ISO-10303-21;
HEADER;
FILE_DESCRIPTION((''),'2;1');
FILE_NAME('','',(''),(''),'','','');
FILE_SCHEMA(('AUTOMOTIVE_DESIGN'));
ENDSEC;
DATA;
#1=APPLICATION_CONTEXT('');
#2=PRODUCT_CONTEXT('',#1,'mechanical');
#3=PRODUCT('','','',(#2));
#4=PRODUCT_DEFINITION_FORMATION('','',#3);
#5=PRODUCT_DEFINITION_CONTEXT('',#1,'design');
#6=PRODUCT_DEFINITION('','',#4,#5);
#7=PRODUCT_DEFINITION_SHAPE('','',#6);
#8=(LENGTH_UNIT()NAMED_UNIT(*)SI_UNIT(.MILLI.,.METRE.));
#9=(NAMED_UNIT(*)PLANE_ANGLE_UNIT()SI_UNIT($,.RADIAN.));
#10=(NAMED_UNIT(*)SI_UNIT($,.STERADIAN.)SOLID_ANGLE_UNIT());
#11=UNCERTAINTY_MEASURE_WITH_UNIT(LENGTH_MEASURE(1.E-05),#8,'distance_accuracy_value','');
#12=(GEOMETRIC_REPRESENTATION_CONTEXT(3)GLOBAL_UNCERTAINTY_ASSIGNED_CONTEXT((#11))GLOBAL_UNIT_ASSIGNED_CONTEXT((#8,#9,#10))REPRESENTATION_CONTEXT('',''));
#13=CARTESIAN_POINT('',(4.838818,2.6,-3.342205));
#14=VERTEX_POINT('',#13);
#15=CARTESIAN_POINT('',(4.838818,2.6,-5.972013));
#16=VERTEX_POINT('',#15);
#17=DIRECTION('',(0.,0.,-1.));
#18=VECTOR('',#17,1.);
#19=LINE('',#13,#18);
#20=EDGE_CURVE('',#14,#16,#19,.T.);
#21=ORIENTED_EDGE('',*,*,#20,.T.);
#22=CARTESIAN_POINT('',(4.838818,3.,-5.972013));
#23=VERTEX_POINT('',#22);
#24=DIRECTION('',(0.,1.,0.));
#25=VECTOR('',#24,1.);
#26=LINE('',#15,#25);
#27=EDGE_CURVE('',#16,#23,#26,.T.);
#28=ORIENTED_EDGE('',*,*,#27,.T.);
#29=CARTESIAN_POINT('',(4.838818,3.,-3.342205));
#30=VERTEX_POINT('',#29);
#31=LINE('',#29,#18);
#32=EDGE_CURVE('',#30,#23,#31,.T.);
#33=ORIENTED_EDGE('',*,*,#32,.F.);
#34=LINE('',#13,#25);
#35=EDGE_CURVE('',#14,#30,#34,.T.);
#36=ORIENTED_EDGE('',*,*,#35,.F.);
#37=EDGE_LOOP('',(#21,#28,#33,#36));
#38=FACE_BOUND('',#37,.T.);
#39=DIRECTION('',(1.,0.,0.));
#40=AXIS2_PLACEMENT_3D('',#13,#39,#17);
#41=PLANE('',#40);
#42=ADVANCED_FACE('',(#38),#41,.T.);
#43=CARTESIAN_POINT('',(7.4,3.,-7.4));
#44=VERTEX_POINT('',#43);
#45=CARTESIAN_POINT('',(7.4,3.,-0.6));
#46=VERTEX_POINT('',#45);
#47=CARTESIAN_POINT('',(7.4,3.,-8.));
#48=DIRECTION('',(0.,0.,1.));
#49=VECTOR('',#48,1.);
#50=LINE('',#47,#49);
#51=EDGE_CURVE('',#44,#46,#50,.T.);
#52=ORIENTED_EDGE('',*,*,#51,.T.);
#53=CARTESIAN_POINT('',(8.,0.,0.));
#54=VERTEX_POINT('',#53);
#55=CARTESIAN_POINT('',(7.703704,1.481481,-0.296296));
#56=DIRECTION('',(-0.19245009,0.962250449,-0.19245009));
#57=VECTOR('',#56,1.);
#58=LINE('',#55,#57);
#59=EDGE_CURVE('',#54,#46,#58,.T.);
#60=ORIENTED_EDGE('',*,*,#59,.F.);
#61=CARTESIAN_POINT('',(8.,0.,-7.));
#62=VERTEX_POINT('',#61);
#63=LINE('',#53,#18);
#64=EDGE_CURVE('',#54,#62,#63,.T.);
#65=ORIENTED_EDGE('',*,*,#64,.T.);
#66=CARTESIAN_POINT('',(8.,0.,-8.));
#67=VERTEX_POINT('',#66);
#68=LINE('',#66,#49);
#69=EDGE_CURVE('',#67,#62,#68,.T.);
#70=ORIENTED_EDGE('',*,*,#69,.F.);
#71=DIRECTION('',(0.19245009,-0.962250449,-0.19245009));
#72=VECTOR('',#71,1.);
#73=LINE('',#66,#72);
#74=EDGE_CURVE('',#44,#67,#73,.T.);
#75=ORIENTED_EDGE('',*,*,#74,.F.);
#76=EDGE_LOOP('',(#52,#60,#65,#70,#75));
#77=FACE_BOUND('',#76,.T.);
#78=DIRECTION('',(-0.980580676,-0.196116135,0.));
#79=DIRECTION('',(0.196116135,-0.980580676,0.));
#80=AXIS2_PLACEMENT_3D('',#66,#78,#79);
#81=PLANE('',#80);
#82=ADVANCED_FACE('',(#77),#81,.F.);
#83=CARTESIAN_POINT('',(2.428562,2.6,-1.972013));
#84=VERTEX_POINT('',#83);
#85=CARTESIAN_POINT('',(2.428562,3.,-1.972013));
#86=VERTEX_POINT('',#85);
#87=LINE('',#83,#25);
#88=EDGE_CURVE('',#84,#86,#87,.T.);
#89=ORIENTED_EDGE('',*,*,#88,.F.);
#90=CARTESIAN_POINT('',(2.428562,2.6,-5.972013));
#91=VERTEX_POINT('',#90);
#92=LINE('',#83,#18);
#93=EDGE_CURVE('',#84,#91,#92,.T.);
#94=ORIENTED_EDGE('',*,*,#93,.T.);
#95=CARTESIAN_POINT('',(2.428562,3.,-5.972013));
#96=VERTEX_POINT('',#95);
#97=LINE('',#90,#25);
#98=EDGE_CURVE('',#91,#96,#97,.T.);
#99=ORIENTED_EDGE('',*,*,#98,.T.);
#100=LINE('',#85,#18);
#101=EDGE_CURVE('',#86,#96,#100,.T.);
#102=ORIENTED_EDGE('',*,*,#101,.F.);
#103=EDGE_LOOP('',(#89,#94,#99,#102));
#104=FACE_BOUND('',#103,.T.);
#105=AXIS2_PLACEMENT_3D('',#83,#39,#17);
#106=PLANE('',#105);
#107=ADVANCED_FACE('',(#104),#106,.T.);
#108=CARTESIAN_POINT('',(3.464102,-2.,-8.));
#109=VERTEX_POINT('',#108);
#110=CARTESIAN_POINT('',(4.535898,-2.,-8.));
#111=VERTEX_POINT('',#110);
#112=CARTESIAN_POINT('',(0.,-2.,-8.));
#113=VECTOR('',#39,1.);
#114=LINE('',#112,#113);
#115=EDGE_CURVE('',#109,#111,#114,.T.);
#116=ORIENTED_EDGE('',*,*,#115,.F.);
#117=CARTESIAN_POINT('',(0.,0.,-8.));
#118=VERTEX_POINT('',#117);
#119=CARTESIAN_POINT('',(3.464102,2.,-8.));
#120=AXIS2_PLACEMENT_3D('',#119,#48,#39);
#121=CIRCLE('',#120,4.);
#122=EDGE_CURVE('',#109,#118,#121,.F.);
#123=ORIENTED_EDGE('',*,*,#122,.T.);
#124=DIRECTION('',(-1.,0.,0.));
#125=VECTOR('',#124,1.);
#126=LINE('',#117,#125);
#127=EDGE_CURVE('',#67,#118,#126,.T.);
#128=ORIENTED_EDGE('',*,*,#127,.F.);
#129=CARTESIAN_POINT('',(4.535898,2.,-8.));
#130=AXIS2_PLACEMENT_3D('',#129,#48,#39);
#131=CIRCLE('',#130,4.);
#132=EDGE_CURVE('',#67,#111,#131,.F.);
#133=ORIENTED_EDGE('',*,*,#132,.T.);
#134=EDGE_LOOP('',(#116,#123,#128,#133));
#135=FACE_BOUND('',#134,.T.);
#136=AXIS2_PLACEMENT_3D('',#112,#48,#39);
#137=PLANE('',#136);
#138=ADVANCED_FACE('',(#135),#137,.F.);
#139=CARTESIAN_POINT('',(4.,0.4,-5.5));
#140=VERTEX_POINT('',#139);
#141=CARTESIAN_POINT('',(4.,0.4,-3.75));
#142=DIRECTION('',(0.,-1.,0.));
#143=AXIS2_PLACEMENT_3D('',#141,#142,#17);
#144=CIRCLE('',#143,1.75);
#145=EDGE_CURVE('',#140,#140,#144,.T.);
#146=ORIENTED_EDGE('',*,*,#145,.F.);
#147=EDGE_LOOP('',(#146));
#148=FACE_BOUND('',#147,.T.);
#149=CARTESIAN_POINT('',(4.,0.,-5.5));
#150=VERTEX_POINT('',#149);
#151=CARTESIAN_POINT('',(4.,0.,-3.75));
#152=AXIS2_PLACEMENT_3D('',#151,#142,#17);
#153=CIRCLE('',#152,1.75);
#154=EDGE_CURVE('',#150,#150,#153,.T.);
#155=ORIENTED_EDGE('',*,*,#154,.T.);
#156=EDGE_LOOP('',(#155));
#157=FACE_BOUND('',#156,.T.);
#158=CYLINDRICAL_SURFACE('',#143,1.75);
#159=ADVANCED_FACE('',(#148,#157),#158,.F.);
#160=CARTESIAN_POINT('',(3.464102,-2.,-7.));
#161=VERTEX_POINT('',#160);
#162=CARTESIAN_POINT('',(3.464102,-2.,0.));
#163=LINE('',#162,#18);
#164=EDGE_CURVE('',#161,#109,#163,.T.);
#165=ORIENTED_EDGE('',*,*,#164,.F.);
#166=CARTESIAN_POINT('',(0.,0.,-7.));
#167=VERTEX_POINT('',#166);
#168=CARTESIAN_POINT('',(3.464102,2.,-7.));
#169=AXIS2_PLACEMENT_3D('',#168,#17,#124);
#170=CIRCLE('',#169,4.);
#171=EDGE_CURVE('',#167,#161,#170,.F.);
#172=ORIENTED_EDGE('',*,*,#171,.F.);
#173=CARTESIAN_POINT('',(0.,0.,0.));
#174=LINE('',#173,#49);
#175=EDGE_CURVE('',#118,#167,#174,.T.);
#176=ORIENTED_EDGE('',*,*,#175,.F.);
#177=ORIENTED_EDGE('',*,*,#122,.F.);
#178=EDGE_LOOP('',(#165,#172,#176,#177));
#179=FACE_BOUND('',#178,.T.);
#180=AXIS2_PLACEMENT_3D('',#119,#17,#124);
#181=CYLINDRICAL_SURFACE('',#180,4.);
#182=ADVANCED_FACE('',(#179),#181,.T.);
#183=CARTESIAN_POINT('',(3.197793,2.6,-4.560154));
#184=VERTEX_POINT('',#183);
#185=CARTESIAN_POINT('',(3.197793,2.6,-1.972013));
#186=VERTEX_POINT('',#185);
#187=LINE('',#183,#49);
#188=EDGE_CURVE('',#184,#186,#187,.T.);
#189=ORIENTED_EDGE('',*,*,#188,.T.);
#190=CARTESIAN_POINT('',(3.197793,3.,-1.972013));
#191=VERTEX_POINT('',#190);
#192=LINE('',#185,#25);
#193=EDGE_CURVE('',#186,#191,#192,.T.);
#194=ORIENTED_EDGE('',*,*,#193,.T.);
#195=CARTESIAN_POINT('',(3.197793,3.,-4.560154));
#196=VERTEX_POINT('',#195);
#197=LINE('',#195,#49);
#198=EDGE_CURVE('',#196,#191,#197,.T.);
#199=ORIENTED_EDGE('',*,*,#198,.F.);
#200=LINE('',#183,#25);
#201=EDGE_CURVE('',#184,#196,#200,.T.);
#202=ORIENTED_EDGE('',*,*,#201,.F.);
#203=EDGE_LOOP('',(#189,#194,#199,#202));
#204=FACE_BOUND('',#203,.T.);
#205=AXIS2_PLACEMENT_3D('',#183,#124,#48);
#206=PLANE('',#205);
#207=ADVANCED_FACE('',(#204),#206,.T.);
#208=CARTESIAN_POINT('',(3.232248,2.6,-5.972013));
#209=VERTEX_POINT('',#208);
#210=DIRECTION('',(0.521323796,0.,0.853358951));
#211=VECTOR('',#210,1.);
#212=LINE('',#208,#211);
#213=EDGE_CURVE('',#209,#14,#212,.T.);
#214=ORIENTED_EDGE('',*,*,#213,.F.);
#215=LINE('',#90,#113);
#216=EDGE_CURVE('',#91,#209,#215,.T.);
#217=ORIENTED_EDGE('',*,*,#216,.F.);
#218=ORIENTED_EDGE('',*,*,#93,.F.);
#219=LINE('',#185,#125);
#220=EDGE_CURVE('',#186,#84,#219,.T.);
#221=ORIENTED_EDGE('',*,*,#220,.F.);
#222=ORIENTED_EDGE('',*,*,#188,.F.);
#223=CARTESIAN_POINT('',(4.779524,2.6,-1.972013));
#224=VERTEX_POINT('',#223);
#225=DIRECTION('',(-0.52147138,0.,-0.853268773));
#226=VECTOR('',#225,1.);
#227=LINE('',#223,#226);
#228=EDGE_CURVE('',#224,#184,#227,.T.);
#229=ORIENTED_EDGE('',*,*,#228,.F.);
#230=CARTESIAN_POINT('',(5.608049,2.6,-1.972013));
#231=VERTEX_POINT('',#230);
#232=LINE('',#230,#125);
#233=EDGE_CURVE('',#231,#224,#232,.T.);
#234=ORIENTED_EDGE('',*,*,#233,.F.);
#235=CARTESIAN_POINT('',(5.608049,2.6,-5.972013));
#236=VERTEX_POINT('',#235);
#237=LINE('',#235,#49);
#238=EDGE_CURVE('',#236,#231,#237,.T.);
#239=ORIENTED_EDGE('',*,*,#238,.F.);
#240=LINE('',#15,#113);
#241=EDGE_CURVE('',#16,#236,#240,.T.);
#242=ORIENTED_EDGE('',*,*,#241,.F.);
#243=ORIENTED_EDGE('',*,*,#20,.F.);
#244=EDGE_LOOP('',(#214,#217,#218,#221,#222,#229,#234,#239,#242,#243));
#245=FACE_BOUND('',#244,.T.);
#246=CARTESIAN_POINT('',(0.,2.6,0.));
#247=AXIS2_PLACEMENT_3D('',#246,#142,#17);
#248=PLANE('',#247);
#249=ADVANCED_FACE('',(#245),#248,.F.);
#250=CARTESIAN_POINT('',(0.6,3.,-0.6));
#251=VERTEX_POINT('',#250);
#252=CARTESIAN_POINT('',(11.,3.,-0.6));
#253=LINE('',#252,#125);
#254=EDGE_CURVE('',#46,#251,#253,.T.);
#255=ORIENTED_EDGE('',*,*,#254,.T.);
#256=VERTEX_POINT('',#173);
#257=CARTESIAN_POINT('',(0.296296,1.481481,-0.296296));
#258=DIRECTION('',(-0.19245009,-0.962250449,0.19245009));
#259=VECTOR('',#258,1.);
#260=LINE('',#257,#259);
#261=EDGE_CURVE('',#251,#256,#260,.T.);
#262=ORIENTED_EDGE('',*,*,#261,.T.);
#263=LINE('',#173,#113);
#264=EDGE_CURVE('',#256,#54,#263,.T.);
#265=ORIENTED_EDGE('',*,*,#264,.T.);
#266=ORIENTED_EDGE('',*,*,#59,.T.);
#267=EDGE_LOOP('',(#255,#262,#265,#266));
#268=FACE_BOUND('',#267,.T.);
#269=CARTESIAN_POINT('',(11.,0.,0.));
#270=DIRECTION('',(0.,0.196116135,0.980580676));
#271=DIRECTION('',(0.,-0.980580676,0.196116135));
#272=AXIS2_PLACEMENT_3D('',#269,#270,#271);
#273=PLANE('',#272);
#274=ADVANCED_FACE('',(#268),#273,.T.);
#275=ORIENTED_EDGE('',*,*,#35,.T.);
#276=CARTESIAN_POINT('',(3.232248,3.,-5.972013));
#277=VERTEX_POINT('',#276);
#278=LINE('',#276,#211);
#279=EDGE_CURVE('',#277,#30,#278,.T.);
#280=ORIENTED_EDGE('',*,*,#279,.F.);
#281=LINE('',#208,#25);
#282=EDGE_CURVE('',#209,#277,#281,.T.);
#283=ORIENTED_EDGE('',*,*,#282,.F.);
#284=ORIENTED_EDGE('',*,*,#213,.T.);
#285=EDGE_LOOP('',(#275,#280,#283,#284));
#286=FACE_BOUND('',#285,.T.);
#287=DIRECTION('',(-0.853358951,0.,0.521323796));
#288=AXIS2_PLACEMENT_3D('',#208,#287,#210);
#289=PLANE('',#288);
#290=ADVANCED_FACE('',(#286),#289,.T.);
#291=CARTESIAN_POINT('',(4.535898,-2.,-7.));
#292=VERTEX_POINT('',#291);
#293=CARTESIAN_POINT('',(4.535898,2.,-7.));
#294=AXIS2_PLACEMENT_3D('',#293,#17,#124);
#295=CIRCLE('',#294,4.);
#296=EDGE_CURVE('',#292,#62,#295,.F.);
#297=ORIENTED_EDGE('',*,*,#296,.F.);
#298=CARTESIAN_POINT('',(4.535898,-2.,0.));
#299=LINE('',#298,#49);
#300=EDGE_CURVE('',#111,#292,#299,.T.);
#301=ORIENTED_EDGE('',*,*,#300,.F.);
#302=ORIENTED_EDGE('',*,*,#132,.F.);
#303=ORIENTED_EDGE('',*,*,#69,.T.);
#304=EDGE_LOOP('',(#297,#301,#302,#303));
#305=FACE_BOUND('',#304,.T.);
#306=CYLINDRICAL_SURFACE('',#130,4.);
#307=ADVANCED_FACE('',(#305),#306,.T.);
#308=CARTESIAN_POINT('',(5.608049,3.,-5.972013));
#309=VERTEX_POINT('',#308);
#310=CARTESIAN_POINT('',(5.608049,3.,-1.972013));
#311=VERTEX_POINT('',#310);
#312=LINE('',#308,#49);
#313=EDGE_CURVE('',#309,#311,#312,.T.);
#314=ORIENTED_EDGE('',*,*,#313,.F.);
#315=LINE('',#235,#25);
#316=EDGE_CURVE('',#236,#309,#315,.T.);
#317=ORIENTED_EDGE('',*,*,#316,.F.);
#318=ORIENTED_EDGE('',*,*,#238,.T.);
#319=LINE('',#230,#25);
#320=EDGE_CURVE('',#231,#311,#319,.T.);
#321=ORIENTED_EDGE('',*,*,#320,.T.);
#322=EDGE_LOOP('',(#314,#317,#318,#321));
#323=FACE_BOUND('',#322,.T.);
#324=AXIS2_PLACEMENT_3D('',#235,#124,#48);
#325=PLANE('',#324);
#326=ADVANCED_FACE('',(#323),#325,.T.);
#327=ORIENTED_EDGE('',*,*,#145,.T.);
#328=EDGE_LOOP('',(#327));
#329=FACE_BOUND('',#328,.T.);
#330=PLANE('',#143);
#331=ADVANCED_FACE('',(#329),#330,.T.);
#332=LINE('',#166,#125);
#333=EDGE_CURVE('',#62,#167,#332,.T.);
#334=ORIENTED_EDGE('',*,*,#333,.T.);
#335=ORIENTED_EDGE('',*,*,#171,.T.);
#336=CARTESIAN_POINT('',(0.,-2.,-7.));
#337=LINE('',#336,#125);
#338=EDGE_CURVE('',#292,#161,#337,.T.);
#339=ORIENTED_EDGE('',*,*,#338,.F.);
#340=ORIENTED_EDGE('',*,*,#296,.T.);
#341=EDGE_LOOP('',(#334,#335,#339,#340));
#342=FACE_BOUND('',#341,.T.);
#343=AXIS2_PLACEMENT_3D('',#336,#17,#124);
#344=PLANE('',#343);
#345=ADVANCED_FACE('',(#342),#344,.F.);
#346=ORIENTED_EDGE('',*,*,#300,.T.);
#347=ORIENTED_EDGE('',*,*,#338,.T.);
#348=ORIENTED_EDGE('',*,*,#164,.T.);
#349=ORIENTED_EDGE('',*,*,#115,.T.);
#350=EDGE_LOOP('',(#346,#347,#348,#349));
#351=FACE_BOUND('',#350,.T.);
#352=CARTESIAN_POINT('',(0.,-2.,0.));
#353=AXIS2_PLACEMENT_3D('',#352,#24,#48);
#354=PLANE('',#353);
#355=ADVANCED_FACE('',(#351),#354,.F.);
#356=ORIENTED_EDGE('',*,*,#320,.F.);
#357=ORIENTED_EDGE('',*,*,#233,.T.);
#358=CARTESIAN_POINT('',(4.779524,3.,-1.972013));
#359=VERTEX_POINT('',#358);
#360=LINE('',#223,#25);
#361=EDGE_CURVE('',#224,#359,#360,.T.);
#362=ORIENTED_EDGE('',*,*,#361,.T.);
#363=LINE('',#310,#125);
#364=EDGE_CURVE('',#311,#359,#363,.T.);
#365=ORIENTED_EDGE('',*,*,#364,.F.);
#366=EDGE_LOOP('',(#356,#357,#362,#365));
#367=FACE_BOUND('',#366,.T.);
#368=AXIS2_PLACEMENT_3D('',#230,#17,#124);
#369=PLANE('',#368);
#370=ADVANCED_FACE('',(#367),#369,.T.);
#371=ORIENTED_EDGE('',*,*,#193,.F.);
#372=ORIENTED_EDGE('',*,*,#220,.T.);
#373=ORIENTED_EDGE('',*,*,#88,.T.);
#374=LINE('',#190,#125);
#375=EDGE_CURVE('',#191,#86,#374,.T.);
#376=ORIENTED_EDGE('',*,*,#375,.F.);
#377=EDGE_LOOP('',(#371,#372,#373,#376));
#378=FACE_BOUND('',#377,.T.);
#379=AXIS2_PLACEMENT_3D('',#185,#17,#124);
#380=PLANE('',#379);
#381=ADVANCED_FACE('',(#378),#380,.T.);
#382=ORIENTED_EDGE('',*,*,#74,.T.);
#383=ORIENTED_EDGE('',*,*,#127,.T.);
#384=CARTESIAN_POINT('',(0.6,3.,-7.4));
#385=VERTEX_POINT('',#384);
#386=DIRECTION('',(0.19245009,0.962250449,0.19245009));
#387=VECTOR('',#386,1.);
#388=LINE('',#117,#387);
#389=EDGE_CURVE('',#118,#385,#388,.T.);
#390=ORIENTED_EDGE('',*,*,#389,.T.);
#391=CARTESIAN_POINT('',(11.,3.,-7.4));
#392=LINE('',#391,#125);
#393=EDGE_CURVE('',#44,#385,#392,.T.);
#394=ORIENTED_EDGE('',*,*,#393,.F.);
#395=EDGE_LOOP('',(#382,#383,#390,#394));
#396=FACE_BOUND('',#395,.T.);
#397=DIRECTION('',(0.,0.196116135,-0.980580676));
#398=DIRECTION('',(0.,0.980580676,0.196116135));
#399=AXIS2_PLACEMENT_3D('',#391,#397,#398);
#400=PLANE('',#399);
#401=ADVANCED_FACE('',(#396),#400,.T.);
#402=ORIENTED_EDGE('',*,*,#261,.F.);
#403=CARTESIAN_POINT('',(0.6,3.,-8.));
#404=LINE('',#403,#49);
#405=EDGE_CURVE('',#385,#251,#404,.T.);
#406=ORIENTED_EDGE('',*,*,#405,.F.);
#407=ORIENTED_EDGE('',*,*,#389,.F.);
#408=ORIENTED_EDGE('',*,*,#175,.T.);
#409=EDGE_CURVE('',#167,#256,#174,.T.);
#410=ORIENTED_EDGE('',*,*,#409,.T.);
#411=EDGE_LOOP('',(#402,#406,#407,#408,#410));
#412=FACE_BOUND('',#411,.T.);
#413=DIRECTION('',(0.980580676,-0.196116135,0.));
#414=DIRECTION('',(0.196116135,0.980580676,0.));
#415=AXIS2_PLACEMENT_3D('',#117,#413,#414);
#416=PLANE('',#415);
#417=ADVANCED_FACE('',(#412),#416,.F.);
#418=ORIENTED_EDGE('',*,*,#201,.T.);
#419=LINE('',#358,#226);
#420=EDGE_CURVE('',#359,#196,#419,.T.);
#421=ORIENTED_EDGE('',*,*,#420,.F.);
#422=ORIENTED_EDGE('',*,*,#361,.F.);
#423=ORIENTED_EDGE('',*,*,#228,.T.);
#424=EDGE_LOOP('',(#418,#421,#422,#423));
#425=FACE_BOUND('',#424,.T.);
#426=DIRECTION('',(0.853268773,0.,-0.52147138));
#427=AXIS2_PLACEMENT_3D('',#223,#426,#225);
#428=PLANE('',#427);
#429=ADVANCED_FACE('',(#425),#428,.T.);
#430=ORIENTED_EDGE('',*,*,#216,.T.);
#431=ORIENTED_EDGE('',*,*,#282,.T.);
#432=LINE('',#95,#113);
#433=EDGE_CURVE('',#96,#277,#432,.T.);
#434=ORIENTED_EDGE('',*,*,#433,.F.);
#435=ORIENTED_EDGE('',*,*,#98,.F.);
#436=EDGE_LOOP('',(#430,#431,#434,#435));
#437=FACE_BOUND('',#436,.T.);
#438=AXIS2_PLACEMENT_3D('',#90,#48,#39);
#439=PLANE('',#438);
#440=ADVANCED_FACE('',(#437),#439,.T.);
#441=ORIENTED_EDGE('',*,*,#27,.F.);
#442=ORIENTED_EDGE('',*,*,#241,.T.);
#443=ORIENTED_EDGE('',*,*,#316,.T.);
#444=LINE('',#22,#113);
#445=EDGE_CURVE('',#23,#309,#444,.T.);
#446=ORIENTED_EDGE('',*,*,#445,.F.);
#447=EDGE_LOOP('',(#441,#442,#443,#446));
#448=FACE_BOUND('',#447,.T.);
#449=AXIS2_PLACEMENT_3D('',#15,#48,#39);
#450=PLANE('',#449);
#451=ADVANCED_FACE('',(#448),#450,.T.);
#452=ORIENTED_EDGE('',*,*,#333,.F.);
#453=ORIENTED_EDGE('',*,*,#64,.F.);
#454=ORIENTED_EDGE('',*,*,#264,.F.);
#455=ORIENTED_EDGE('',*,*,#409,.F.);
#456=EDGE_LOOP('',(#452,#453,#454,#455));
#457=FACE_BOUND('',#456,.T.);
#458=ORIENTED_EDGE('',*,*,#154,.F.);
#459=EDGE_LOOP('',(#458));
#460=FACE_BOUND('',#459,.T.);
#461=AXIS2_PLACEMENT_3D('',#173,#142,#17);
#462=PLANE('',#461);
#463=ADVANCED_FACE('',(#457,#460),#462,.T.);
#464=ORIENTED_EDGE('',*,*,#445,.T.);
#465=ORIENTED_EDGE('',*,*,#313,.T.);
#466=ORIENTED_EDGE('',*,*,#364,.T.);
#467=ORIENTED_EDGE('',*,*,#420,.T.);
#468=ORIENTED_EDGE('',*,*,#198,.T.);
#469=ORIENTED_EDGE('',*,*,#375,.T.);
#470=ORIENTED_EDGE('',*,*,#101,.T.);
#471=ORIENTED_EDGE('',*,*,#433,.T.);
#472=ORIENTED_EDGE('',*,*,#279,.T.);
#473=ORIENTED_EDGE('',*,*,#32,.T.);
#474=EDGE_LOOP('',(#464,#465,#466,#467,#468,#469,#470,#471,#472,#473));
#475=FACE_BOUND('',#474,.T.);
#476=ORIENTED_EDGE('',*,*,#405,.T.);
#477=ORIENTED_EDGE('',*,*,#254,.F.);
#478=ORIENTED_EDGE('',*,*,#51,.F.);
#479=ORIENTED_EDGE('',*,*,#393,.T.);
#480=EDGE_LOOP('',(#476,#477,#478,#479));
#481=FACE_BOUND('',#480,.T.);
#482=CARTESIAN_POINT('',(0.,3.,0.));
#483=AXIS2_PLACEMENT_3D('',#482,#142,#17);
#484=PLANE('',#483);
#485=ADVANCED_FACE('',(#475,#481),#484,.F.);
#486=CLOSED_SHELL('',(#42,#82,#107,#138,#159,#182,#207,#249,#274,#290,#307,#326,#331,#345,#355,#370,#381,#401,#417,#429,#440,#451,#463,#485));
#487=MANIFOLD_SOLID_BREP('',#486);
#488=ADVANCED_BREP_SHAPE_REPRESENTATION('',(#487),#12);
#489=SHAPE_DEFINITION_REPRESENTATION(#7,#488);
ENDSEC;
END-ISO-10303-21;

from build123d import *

# Parameters (mm, degrees)
SKETCH1_W               = 8
SKETCH1_H               = 8
BOSS_EXTRUDE1_DEPTH     = 3
CUT_EXTRUDE1_DEPTH      = 12.704699911
CUT_EXTRUDE1_DEPTH_BACK = 12.704699911
CUT_EXTRUDE2_DEPTH      = 11
SKETCH4_R               = 1.75
CUT_EXTRUDE3_DEPTH      = 0.4
SKETCH5_W               = 8
SKETCH5_H               = 1
BOSS_EXTRUDE2_DEPTH     = 2
FILLET1_R               = 4
CUT_EXTRUDE4_DEPTH      = 0.4


with BuildPart() as part:
    # Sketch1 → Boss-Extrude1 (new body)
    with BuildSketch(Plane(origin=(0, 0, 0), x_dir=(1, 0, 0), z_dir=(0, 1, 0))):
        with Locations((4, 4)):
            Rectangle(SKETCH1_W, SKETCH1_H)
    extrude(amount=BOSS_EXTRUDE1_DEPTH)

    # Sketch2 → Cut-Extrude1 (cut, two sides: drawn at the far end of the back side and taken through both)
    with BuildSketch(Plane.XY.offset(-CUT_EXTRUDE1_DEPTH_BACK)):
        Polygon((0, 0), (0.6, 3), (0, 3), align=None)
        Polygon((8, 0), (7.4, 3), (8, 3), align=None)
    extrude(amount=CUT_EXTRUDE1_DEPTH + CUT_EXTRUDE1_DEPTH_BACK, mode=Mode.SUBTRACT)

    # Sketch3 → Cut-Extrude2 (cut)
    with BuildSketch(Plane(origin=(0, 0, 0), x_dir=(0, 0, -1), z_dir=(1, 0, 0))):
        Polygon((0, 0), (0.6, 3), (0, 3), align=None)
        Polygon((8, 3), (7.4, 3), (8, 0), align=None)
    extrude(amount=CUT_EXTRUDE2_DEPTH, mode=Mode.SUBTRACT)

    # Sketch4 → Cut-Extrude3 (cut)
    with BuildSketch(Plane.XZ):
        with Locations(Location((4, -3.75, 0), (0, 0, 270))):
            Circle(SKETCH4_R)
    extrude(amount=-CUT_EXTRUDE3_DEPTH, mode=Mode.SUBTRACT)

    # Sketch5 → Boss-Extrude2 (add)
    with BuildSketch(Plane.XZ):
        with Locations((4, -7.5)):
            Rectangle(SKETCH5_W, SKETCH5_H)
    extrude(amount=BOSS_EXTRUDE2_DEPTH)

    # Fillet1
    # the kernel refuses this fillet: 4 mm, written as the material it takes off along each edge
    with BuildSketch(Plane(origin=(8, -2, -16.660254038), x_dir=(0, 1, 0), z_dir=(0, 0, 1)), Plane(origin=(0, -2, 1.660254038), x_dir=(0, 1, 0), z_dir=(0, 0, -1))) as fillet1_piece_1:
        with BuildLine():
            CenterArc((4, 3.464101615), FILLET1_R, 180, 60)
            Line((0, 3.464101615), (-0.08, 3.464101615))
            Line((-0.08, 3.464101615), (-0.08, 0))
            Line((-0.08, 0), (0, -0.08))
            ThreePointArc((0, -0.08), (1, -0.08), (1.96, -0.069282032))
            Line((1.96, -0.069282032), (2, 0))
        make_face()
    extrude(amount=18.320508076, mode=Mode.SUBTRACT)

    # Sketch6 → Cut-Extrude4 (cut)
    with BuildSketch(Plane(origin=(0, 3, 0), x_dir=(1, 0, 0), z_dir=(0, 1, 0))):
        Polygon((2.428562008, 1.972012859), (2.428562008, 5.972012859), (3.232247906, 5.972012859), (4.838818418, 3.342205167), (4.838818418, 5.972012859), (5.608049188, 5.972012859), (5.608049188, 1.972012859), (4.779523547, 1.972012859), (3.197792777, 4.560153885), (3.197792777, 1.972012859), align=None)
    extrude(amount=-CUT_EXTRUDE4_DEPTH, mode=Mode.SUBTRACT)


solid = part.part
